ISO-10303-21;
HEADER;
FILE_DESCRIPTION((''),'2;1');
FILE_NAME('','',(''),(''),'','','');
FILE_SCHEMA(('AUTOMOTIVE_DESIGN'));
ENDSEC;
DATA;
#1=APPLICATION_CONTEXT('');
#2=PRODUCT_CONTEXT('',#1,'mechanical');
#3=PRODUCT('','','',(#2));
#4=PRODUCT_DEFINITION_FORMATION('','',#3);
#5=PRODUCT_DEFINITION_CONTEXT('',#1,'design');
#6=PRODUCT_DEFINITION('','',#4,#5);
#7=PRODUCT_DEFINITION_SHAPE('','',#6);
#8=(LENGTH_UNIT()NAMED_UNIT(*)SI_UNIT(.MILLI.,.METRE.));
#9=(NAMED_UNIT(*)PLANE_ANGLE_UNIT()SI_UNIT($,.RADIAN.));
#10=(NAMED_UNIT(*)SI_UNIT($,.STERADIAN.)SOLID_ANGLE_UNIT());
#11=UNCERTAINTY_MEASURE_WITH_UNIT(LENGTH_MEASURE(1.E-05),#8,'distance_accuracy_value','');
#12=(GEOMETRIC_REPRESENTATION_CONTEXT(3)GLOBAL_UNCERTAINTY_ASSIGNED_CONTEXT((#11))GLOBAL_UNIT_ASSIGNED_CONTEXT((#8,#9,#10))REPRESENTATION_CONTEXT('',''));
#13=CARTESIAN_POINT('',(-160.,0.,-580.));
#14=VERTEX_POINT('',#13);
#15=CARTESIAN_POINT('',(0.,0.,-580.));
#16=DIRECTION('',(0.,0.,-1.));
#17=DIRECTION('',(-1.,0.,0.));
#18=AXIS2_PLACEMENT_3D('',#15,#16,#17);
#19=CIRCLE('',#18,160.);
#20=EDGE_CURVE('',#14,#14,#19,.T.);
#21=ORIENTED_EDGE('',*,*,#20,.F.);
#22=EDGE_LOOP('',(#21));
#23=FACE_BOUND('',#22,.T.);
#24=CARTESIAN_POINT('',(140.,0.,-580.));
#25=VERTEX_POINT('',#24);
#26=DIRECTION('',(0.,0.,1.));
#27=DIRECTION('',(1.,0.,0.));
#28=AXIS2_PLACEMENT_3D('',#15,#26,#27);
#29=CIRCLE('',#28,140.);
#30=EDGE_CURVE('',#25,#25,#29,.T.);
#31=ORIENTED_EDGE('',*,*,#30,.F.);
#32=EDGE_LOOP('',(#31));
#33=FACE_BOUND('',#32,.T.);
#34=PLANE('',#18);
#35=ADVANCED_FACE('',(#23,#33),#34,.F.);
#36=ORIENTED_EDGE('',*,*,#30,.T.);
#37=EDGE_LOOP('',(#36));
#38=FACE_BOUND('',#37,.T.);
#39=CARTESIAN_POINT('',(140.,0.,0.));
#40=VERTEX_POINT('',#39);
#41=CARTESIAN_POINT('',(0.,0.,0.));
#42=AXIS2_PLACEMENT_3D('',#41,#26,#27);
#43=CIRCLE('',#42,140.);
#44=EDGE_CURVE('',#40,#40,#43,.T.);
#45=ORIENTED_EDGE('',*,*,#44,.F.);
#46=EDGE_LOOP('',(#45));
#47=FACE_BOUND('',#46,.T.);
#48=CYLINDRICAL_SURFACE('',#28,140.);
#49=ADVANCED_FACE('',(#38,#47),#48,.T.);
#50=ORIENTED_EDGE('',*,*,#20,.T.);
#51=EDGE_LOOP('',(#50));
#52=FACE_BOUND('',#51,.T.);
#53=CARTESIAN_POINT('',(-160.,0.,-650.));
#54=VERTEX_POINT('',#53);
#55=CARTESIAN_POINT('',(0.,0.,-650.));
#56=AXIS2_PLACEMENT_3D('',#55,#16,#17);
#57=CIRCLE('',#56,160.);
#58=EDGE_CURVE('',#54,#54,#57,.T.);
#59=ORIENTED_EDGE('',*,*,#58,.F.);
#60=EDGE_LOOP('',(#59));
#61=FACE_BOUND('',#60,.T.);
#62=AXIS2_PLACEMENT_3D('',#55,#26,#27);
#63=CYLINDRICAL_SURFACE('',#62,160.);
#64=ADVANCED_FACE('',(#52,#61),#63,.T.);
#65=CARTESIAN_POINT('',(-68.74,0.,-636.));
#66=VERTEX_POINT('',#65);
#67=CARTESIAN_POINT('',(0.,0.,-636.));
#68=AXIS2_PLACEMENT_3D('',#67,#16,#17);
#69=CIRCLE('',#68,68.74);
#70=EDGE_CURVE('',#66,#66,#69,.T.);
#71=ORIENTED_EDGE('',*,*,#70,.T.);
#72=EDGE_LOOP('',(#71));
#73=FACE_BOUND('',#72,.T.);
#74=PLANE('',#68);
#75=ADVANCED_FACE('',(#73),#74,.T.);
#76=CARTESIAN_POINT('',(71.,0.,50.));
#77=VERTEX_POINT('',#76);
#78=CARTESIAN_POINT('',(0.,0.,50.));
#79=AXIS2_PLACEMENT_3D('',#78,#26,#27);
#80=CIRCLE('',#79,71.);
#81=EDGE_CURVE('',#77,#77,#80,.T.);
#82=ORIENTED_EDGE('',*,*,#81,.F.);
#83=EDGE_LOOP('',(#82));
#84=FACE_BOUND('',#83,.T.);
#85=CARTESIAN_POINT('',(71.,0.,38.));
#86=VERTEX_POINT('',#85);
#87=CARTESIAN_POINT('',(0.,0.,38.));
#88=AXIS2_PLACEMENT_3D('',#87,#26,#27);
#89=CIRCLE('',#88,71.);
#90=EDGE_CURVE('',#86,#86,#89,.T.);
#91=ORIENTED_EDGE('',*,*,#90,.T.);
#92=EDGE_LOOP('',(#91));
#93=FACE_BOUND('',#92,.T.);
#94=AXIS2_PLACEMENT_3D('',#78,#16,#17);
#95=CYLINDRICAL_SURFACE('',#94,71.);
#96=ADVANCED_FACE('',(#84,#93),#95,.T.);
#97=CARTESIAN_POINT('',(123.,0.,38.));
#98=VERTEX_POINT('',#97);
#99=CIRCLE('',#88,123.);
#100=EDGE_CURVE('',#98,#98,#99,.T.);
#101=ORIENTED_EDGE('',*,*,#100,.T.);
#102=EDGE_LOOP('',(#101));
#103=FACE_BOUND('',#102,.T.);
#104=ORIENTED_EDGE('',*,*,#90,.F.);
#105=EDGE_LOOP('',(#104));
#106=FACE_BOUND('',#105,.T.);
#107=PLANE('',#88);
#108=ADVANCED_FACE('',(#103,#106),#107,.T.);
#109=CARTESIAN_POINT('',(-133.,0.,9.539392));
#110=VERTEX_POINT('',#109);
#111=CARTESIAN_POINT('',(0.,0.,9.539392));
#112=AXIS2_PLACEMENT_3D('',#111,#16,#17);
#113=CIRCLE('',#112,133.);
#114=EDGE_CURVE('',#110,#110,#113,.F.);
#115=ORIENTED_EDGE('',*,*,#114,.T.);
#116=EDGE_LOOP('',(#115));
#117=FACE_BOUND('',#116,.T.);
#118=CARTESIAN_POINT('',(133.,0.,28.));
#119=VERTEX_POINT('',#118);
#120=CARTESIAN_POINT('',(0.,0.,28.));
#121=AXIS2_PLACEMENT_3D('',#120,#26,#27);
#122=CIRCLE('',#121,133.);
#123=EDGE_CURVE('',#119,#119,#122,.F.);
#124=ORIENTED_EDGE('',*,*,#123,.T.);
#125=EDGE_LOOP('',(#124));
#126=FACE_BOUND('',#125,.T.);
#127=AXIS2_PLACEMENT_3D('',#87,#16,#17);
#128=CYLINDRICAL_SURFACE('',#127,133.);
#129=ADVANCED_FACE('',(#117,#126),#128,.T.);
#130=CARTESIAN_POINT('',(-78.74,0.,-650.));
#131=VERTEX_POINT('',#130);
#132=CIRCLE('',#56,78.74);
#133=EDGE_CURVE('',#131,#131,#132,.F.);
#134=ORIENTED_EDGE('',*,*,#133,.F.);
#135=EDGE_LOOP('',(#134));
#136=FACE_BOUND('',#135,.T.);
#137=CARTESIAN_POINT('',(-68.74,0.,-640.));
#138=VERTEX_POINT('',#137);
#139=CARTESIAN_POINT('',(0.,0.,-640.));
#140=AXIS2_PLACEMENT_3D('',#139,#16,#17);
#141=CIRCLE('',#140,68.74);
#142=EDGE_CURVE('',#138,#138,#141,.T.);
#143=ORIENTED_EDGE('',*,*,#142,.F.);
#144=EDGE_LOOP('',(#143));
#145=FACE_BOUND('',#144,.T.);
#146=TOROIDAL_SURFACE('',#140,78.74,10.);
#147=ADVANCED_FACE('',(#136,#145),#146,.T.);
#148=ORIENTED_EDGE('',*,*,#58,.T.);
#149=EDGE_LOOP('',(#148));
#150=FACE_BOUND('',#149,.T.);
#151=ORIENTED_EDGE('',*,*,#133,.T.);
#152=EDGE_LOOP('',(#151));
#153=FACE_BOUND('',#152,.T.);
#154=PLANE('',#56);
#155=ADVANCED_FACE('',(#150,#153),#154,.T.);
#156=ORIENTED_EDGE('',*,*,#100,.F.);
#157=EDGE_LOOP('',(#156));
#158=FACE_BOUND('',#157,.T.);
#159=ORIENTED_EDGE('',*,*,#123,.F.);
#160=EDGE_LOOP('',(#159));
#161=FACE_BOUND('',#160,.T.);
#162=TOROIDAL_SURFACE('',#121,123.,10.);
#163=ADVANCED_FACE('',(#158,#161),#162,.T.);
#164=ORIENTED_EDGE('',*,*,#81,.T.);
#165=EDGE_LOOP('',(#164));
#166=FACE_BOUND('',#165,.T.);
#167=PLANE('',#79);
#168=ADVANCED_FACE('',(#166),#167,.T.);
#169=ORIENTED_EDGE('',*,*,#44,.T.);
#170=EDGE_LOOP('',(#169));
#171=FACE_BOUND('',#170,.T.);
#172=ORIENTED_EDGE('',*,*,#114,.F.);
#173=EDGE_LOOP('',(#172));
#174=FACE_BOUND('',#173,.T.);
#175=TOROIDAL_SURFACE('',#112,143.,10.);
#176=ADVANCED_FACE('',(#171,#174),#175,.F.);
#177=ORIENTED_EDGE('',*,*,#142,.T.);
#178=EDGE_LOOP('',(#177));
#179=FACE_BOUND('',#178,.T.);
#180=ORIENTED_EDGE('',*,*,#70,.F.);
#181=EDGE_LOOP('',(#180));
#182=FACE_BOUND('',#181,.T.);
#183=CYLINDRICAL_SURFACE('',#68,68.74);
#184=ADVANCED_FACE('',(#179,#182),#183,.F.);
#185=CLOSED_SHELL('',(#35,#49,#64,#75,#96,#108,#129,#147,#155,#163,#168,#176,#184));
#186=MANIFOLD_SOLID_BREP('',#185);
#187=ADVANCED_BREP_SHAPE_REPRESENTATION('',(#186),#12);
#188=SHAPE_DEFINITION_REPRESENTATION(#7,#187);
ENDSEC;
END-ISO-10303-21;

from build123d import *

# Parameters (mm, degrees)
SKETCH1_R           = 140
BOSS_EXTRUDE1_DEPTH = 580
SKETCH2_R           = 133
BOSS_EXTRUDE2_DEPTH = 38
SKETCH3_R           = 71
BOSS_EXTRUDE3_DEPTH = 12
FILLET2_R           = 10
SKETCH4_R           = 160
BOSS_EXTRUDE4_DEPTH = 70
SKETCH5_R           = 68.74
CUT_EXTRUDE1_DEPTH  = 14
FILLET3_R           = 10


with BuildPart() as part:
    # Sketch1 → Boss-Extrude1 (new body)
    with BuildSketch(Plane.XY):
        Circle(SKETCH1_R)
    extrude(amount=-BOSS_EXTRUDE1_DEPTH)

    # Sketch2 → Boss-Extrude2 (add)
    with BuildSketch(Plane.XY):
        Circle(SKETCH2_R)
    extrude(amount=BOSS_EXTRUDE2_DEPTH)

    # Sketch3 → Boss-Extrude3 (add)
    with BuildSketch(Plane.XY.offset(38)):
        Circle(SKETCH3_R)
    extrude(amount=BOSS_EXTRUDE3_DEPTH)

    # Fillet2
    # the kernel refuses this fillet: 10 mm, written as the material it adds along each edge
    with BuildSketch(Plane(origin=(0, 0, 0), x_dir=(1, 0, 0), z_dir=(0, -1, 0))) as fillet2_piece_1:
        with BuildLine():
            CenterArc((143, 9.539392014), FILLET2_R, 180, 72.542396876)
            Line((133, 9.539392014), (133, 0))
            Line((133, 0), (140, 0))
        make_face()
    revolve(axis=Axis((0, 0, 0), (0, 0, 1)))
    # the kernel refuses this fillet: 10 mm, written as the material it takes off along each edge
    with BuildSketch(Plane(origin=(0, 0, 38), x_dir=(1, 0, 0), z_dir=(0, -1, 0))) as fillet2_2_piece_1:
        with BuildLine():
            CenterArc((133 - FILLET2_R, -FILLET2_R), FILLET2_R, 0, 90)
            Line((133 - FILLET2_R, 0), (133, 0))
            Line((133, 0), (133, -FILLET2_R))
        make_face()
    revolve(axis=Axis((0, 0, 38), (0, 0, 1)), mode=Mode.SUBTRACT)

    # Sketch4 → Boss-Extrude4 (add)
    with BuildSketch(Plane(origin=(0, 0, -580), x_dir=(-1, 0, 0), z_dir=(0, 0, -1))):
        Circle(SKETCH4_R)
    extrude(amount=BOSS_EXTRUDE4_DEPTH)

    # Sketch5 → Cut-Extrude1 (cut)
    with BuildSketch(Plane(origin=(0, 0, -650), x_dir=(-1, 0, 0), z_dir=(0, 0, -1))):
        Circle(SKETCH5_R)
    extrude(amount=-CUT_EXTRUDE1_DEPTH, mode=Mode.SUBTRACT)

    # Fillet3
    fillet3_edges = [part.edges().sort_by_distance(p)[0] for p in [
        (68.74, 0, -650),
    ]]
    fillet(fillet3_edges, radius=FILLET3_R)


solid = part.part
